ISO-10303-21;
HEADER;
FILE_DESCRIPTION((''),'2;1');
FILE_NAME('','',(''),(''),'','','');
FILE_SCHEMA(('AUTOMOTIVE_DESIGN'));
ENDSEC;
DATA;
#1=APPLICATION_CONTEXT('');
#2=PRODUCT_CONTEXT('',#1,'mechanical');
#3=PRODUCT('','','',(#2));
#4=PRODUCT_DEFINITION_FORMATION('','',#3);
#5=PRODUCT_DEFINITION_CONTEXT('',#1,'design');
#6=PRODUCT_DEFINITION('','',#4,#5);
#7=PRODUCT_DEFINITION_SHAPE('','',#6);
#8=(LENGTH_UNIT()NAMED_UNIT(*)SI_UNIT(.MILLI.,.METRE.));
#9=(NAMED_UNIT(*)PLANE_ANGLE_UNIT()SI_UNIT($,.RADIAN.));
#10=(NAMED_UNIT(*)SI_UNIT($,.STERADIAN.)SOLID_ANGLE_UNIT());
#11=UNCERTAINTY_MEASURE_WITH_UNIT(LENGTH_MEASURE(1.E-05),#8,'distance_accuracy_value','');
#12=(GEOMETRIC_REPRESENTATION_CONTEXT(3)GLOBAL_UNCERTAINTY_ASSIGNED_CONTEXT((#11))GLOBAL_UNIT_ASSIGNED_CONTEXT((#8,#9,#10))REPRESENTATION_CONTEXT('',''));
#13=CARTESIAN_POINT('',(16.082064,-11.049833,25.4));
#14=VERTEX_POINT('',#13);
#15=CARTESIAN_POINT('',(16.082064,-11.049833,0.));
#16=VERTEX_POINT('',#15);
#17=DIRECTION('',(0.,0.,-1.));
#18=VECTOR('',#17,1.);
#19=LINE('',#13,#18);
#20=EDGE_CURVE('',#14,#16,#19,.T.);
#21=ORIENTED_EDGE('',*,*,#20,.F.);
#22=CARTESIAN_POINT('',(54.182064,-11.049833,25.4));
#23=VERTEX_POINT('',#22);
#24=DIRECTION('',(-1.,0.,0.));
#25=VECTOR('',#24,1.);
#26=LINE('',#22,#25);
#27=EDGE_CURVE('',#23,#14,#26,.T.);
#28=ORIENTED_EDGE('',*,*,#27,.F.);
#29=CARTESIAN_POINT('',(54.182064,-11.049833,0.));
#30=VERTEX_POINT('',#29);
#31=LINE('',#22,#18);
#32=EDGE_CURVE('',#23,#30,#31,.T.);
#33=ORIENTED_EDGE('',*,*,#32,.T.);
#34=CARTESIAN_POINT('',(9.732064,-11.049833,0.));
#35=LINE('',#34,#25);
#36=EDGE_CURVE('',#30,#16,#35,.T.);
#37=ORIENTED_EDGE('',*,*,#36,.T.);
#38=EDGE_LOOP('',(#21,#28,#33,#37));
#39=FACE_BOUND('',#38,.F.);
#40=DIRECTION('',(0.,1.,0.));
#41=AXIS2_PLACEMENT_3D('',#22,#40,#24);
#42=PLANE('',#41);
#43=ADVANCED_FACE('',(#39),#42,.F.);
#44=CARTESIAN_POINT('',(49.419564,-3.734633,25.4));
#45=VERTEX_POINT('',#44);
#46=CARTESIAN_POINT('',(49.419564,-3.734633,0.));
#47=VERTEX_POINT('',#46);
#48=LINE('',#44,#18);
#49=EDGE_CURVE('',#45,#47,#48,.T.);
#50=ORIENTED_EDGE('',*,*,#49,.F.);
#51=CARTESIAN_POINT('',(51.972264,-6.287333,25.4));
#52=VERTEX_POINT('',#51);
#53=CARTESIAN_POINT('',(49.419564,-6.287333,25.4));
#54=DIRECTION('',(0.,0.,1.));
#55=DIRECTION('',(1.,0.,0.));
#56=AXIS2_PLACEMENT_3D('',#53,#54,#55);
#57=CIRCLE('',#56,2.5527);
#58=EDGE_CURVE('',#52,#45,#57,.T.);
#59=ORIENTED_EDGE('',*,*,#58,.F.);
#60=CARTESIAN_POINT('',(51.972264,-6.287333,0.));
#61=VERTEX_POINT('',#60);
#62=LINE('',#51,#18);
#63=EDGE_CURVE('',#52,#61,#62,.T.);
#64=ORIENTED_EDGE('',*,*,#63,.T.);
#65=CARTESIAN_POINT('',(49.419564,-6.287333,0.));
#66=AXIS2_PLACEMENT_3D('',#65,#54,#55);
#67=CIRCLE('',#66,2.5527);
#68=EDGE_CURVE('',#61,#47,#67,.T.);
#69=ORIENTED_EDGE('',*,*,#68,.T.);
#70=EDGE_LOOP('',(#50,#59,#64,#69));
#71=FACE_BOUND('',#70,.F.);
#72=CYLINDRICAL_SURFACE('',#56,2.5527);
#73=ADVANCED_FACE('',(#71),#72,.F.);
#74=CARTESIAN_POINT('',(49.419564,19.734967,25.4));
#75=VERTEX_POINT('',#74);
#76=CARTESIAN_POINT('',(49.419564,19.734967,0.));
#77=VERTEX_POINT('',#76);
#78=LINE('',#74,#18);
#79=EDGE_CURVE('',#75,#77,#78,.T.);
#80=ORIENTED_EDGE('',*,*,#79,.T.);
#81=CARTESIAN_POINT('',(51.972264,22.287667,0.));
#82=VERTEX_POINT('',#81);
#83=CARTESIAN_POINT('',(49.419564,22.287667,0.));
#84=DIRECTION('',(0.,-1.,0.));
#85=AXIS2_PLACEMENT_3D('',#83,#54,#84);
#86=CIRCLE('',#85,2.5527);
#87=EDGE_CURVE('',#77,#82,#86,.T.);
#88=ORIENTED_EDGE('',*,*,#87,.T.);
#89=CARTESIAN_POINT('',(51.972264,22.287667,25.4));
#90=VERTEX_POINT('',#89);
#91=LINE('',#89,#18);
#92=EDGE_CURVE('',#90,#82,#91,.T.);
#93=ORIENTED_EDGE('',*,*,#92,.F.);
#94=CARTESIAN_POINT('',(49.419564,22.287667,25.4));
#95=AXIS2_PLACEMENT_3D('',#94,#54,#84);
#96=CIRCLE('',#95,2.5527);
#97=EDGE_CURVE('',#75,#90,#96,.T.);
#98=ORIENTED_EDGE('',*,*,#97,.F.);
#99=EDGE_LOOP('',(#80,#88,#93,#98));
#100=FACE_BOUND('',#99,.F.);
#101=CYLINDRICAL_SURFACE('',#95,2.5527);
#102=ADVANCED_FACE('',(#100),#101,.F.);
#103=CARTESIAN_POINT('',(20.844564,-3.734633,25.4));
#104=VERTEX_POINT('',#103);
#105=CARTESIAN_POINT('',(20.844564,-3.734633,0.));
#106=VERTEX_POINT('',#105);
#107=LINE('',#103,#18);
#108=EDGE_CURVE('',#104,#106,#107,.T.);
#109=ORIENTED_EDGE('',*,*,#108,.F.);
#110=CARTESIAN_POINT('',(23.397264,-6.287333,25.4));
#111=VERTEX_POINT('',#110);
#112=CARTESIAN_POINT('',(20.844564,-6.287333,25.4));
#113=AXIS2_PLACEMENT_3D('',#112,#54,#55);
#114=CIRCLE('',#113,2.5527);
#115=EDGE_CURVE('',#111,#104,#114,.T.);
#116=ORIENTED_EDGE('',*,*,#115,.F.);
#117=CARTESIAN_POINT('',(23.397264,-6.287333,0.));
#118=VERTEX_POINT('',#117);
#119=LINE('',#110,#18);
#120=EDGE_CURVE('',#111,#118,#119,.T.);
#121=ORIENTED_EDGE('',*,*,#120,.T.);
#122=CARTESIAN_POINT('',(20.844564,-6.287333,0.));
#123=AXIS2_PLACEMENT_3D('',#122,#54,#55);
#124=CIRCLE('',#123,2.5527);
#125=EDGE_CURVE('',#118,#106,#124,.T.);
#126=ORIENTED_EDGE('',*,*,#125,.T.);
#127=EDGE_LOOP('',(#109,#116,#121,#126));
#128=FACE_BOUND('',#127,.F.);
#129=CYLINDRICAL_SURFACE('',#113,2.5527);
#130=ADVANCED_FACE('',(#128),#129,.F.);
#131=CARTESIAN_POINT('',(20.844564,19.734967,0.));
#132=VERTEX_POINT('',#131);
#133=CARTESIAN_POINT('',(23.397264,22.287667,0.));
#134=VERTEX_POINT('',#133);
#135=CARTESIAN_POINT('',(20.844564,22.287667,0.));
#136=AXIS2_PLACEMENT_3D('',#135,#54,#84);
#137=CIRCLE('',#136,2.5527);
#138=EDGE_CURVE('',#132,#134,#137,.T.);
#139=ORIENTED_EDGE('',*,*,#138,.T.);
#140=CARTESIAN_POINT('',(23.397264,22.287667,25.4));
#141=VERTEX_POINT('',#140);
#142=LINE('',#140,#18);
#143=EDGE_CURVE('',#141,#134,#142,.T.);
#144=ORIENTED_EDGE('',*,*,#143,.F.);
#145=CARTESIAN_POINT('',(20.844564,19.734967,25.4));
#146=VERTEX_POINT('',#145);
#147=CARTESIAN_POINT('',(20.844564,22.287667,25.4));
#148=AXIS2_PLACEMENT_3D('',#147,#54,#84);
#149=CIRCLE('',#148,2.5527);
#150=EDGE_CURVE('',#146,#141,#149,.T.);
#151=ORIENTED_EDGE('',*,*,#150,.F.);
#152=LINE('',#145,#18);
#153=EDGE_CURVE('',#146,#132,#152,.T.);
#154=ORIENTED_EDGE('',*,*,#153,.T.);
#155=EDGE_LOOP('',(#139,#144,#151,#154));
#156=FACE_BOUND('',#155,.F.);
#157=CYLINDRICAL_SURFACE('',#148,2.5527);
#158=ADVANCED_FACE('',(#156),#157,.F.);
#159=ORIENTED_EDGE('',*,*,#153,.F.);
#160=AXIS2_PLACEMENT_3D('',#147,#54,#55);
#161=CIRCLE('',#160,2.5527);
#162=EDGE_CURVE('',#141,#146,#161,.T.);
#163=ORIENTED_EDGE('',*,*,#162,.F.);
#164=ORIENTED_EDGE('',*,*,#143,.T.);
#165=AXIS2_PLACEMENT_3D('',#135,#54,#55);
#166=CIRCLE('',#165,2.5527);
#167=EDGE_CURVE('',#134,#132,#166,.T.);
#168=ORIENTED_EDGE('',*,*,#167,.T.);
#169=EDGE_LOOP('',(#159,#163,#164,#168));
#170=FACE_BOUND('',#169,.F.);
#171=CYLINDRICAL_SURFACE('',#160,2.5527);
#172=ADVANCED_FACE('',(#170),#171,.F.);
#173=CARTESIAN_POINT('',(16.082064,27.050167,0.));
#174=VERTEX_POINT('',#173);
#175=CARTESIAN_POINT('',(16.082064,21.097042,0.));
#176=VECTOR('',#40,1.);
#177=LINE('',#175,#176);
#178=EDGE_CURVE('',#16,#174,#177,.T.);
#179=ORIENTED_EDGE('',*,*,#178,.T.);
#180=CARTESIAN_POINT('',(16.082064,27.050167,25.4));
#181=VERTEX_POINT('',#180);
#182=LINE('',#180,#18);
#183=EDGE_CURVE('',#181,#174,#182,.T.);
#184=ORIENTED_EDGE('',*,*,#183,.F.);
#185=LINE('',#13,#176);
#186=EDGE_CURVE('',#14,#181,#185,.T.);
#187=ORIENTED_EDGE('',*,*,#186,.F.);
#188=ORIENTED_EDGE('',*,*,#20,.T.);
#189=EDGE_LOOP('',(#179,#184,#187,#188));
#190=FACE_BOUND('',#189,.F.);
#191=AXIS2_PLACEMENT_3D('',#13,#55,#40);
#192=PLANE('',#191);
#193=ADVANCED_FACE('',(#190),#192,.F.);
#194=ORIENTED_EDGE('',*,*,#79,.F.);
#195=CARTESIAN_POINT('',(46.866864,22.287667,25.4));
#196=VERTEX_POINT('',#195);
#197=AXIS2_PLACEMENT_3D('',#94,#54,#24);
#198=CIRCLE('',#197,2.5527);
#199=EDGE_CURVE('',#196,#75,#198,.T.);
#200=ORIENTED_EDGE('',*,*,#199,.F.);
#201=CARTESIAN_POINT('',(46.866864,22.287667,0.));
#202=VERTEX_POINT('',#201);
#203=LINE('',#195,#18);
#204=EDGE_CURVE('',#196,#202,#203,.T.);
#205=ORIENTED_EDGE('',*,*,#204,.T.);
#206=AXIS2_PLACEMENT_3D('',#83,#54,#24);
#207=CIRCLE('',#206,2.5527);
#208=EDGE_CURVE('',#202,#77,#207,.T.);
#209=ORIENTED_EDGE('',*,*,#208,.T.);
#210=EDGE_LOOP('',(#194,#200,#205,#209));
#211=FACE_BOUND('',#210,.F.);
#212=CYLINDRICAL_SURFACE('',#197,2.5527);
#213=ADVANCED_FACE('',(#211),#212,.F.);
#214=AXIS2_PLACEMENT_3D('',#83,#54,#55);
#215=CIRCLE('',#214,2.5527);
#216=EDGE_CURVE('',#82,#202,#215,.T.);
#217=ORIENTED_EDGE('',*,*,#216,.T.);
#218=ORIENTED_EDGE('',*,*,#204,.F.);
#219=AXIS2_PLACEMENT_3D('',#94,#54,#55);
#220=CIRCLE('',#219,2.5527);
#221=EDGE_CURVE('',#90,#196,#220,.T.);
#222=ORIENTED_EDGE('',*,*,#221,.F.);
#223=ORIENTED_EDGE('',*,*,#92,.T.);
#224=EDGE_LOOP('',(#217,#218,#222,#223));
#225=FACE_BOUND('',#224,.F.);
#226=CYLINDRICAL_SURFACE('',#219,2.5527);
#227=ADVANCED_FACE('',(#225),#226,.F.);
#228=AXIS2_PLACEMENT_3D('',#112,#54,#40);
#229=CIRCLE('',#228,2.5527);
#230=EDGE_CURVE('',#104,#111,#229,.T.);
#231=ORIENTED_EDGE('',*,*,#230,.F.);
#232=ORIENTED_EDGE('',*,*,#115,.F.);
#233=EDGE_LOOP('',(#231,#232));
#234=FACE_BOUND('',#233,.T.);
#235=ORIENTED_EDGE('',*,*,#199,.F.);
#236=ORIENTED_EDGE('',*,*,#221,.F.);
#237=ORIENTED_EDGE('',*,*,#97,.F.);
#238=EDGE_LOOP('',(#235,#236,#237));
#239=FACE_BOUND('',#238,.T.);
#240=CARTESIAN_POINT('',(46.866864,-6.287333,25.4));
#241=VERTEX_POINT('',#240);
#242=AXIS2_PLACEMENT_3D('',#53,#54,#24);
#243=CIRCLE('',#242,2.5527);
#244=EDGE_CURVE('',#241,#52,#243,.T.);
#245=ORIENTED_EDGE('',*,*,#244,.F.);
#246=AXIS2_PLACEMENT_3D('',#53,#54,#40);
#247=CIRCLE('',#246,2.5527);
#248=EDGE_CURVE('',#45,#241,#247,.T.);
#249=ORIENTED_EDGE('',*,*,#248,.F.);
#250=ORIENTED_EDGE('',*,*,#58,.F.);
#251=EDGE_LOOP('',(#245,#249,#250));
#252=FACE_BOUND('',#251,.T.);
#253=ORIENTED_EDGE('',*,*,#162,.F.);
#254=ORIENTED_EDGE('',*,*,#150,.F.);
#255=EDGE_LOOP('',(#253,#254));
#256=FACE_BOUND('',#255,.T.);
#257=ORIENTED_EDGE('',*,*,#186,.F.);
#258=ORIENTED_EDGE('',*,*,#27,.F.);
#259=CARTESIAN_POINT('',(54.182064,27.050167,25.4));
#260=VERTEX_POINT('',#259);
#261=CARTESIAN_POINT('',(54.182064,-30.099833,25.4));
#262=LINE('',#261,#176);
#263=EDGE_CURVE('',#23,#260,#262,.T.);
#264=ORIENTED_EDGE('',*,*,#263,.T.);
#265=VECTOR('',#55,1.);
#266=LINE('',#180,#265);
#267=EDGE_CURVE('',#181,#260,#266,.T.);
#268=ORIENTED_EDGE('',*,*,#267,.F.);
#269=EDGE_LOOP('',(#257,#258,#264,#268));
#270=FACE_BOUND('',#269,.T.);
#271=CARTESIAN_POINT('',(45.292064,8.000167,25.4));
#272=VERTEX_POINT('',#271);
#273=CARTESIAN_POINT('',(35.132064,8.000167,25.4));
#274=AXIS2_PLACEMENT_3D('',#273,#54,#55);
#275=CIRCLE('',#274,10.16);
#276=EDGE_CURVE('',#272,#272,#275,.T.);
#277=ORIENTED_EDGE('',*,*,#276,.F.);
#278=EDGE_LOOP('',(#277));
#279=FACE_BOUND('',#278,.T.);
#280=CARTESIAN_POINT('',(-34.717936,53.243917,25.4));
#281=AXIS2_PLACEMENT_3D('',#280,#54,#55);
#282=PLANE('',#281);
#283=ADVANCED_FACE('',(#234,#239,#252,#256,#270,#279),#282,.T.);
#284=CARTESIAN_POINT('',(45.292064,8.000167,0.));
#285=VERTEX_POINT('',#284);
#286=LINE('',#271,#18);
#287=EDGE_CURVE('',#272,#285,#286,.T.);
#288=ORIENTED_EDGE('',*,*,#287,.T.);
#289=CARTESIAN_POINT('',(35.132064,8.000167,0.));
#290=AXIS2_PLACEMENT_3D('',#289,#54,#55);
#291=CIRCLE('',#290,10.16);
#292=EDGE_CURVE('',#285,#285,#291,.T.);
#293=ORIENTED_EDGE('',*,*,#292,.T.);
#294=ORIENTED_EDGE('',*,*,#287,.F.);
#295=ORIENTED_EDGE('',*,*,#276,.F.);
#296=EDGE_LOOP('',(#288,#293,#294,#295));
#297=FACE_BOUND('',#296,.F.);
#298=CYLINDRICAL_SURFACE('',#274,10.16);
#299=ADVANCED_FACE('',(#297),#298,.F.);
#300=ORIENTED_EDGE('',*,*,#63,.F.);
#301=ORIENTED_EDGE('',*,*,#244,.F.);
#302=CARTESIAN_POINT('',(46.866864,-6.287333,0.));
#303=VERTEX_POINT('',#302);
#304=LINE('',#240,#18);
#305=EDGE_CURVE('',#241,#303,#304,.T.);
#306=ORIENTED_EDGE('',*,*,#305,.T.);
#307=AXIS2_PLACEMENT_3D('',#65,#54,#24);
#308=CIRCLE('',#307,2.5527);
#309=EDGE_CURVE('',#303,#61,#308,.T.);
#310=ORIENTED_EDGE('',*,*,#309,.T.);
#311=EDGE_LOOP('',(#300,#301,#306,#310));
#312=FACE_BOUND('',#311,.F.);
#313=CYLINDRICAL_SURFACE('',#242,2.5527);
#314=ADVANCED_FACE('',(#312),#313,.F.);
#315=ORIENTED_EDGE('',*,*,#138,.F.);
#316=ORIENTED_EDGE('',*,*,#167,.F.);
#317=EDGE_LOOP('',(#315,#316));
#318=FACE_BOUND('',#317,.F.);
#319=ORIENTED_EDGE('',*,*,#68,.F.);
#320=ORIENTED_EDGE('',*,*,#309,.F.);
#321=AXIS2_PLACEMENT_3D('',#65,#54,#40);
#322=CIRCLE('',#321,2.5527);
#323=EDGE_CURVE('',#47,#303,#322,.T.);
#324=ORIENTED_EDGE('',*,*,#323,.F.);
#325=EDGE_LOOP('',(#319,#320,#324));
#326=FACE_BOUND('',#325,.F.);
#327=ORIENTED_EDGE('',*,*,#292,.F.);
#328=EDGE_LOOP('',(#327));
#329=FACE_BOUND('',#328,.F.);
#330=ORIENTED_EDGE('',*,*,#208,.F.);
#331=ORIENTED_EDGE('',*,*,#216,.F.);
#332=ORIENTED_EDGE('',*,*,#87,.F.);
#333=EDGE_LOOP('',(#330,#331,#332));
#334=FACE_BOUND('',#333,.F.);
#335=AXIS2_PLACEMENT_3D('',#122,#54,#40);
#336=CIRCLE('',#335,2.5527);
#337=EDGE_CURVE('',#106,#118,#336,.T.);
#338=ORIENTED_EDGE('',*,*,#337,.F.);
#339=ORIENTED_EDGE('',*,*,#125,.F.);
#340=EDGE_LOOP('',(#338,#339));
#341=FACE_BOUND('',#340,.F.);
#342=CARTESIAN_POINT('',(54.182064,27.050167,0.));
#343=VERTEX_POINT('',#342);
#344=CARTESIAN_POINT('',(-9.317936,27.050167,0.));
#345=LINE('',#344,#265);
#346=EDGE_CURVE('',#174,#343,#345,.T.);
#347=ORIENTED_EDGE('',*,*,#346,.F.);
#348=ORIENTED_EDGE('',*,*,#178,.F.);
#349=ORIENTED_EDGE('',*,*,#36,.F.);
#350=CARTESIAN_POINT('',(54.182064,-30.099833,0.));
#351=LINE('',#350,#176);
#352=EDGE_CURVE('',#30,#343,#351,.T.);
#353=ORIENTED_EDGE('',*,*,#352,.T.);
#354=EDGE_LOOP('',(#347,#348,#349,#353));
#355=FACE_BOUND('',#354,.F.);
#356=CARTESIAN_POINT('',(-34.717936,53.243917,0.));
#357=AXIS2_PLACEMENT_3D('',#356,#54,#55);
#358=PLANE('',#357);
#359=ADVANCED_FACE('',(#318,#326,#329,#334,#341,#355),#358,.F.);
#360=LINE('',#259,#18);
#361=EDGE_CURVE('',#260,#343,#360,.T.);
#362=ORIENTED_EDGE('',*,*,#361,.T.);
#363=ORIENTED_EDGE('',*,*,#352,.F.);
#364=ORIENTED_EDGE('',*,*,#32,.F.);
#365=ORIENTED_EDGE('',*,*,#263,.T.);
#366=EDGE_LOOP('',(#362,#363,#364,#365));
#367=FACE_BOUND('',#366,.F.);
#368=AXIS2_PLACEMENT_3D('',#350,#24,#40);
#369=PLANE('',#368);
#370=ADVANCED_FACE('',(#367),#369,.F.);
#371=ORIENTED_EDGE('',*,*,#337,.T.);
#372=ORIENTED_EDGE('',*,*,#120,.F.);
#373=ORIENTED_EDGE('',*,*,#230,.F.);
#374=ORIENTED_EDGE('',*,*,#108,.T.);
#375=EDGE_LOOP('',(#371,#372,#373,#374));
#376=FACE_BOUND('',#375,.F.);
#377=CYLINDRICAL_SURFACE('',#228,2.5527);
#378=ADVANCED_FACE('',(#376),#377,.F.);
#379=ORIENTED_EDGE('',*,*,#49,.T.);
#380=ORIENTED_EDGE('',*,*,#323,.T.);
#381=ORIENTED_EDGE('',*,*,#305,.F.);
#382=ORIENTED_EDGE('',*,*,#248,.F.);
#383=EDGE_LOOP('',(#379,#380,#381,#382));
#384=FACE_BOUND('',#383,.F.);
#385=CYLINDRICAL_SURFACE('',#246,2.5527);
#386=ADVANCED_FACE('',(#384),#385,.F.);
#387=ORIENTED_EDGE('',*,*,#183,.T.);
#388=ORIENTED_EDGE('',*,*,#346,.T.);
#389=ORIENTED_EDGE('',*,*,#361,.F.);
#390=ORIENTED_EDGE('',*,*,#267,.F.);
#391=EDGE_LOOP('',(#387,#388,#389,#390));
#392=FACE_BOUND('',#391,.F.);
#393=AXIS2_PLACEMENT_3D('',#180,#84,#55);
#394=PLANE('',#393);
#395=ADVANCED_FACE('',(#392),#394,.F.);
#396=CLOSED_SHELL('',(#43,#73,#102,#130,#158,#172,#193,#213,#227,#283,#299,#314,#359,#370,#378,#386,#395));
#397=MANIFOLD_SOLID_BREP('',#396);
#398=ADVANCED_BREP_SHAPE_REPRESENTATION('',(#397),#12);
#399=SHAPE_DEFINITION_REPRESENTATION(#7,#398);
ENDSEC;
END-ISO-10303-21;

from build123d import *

# Parameters (mm, degrees)
F0_W     = 25.4
F0_H     = 14.2875
F1_DEPTH = 25.4
F2_R     = 10.16
F3_DEPTH = 25.401
F5_DEPTH = 25.401


# Not quite as in the source:
# - a feature names something its author has since deleted; it is built from what else it names


with BuildPart() as f1:
    # F0 (on Top) → F1 (new body)
    with BuildSketch(Plane.XY):
        with Locations((-34.7179355979, 53.2439169049)):
            Rectangle(F0_W, F0_H)
        Polygon((-22.0179355979, 46.1001669049), (-47.4179355979, 46.1001669049), (-47.4179355979, -30.0998330951), (-22.0179355979, -30.0998330951), (54.1820644021, -30.0998330951), (54.1820644021, 46.1001669049), align=None)
        with Locations((-34.7179355979, -37.2435830951)):
            Rectangle(F0_W, F0_H)
    extrude(amount=F1_DEPTH)

    # F2 (on face) → F3 (cut, through all)
    with BuildSketch(Plane.XY.offset(25.4)):
        with Locations((35.1320644021, 8.0001669049)):
            Circle(F2_R)
        with BuildLine():
            Line((23.3972644021, 22.2876669049), (20.8445644021, 22.2876669049))
            Line((20.8445644021, 22.2876669049), (20.8445644021, 19.7349669049))
            ThreePointArc((20.8445644021, 19.7349669049), (22.6495958824, 20.4826354246), (23.3972644021, 22.2876669049))
        make_face()
        with BuildLine():
            Line((20.8445644021, 19.7349669049), (20.8445644021, 22.2876669049))
            Line((20.8445644021, 22.2876669049), (23.3972644021, 22.2876669049))
            ThreePointArc((23.3972644021, 22.2876669049), (19.0395329218, 24.0926983853), (20.8445644021, 19.7349669049))
        make_face()
        with BuildLine():
            ThreePointArc((51.9722644021, 22.2876669049), (49.4195644021, 24.8403669049), (46.8668644021, 22.2876669049))
            Line((46.8668644021, 22.2876669049), (49.4195644021, 22.2876669049))
            Line((49.4195644021, 22.2876669049), (49.4195644021, 19.7349669049))
            ThreePointArc((49.4195644021, 19.7349669049), (51.2245958824, 20.4826354246), (51.9722644021, 22.2876669049))
        make_face()
        with BuildLine():
            Line((49.4195644021, 22.2876669049), (46.8668644021, 22.2876669049))
            ThreePointArc((46.8668644021, 22.2876669049), (47.6145329218, 20.4826354246), (49.4195644021, 19.7349669049))
            Line((49.4195644021, 19.7349669049), (49.4195644021, 22.2876669049))
        make_face()
        with BuildLine():
            Line((49.4195644021, -6.2873330951), (49.4195644021, -3.7346330951))
            ThreePointArc((49.4195644021, -3.7346330951), (47.6145329218, -4.4823016147), (46.8668644021, -6.2873330951))
            Line((46.8668644021, -6.2873330951), (49.4195644021, -6.2873330951))
        make_face()
        with BuildLine():
            ThreePointArc((51.9722644021, -6.2873330951), (51.2245958824, -4.4823016147), (49.4195644021, -3.7346330951))
            Line((49.4195644021, -3.7346330951), (49.4195644021, -6.2873330951))
            Line((49.4195644021, -6.2873330951), (46.8668644021, -6.2873330951))
            ThreePointArc((46.8668644021, -6.2873330951), (49.4195644021, -8.8400330951), (51.9722644021, -6.2873330951))
        make_face()
        with BuildLine():
            ThreePointArc((23.3972644021, -6.2873330951), (22.6495958824, -4.4823016147), (20.8445644021, -3.7346330951))
            Line((20.8445644021, -3.7346330951), (20.8445644021, -6.2873330951))
            Line((20.8445644021, -6.2873330951), (23.3972644021, -6.2873330951))
        make_face()
        with BuildLine():
            Line((20.8445644021, -6.2873330951), (20.8445644021, -3.7346330951))
            ThreePointArc((20.8445644021, -3.7346330951), (19.0395329218, -8.0923645754), (23.3972644021, -6.2873330951))
            Line((23.3972644021, -6.2873330951), (20.8445644021, -6.2873330951))
        make_face()
    extrude(amount=-F3_DEPTH, mode=Mode.SUBTRACT)

    # F4 (on face) → F5 (cut, through all)
    with BuildSketch(Plane.XY.offset(25.4)):
        Polygon((54.1820644021, -30.0998330951), (54.1820644021, -11.0498330951), (16.0820644021, -11.0498330951), (16.0820644021, 27.0501669049), (54.1820644021, 27.0501669049), (54.1820644021, 46.1001669049), (-22.0179355979, 46.1001669049), (-22.0179355979, 60.3876669049), (-47.4179355979, 60.3876669049), (-47.4179355979, -44.3873330951), (-22.0179355979, -44.3873330951), (-22.0179355979, -30.0998330951), align=None)
    extrude(amount=-F5_DEPTH, mode=Mode.SUBTRACT)


solid = f1.part
